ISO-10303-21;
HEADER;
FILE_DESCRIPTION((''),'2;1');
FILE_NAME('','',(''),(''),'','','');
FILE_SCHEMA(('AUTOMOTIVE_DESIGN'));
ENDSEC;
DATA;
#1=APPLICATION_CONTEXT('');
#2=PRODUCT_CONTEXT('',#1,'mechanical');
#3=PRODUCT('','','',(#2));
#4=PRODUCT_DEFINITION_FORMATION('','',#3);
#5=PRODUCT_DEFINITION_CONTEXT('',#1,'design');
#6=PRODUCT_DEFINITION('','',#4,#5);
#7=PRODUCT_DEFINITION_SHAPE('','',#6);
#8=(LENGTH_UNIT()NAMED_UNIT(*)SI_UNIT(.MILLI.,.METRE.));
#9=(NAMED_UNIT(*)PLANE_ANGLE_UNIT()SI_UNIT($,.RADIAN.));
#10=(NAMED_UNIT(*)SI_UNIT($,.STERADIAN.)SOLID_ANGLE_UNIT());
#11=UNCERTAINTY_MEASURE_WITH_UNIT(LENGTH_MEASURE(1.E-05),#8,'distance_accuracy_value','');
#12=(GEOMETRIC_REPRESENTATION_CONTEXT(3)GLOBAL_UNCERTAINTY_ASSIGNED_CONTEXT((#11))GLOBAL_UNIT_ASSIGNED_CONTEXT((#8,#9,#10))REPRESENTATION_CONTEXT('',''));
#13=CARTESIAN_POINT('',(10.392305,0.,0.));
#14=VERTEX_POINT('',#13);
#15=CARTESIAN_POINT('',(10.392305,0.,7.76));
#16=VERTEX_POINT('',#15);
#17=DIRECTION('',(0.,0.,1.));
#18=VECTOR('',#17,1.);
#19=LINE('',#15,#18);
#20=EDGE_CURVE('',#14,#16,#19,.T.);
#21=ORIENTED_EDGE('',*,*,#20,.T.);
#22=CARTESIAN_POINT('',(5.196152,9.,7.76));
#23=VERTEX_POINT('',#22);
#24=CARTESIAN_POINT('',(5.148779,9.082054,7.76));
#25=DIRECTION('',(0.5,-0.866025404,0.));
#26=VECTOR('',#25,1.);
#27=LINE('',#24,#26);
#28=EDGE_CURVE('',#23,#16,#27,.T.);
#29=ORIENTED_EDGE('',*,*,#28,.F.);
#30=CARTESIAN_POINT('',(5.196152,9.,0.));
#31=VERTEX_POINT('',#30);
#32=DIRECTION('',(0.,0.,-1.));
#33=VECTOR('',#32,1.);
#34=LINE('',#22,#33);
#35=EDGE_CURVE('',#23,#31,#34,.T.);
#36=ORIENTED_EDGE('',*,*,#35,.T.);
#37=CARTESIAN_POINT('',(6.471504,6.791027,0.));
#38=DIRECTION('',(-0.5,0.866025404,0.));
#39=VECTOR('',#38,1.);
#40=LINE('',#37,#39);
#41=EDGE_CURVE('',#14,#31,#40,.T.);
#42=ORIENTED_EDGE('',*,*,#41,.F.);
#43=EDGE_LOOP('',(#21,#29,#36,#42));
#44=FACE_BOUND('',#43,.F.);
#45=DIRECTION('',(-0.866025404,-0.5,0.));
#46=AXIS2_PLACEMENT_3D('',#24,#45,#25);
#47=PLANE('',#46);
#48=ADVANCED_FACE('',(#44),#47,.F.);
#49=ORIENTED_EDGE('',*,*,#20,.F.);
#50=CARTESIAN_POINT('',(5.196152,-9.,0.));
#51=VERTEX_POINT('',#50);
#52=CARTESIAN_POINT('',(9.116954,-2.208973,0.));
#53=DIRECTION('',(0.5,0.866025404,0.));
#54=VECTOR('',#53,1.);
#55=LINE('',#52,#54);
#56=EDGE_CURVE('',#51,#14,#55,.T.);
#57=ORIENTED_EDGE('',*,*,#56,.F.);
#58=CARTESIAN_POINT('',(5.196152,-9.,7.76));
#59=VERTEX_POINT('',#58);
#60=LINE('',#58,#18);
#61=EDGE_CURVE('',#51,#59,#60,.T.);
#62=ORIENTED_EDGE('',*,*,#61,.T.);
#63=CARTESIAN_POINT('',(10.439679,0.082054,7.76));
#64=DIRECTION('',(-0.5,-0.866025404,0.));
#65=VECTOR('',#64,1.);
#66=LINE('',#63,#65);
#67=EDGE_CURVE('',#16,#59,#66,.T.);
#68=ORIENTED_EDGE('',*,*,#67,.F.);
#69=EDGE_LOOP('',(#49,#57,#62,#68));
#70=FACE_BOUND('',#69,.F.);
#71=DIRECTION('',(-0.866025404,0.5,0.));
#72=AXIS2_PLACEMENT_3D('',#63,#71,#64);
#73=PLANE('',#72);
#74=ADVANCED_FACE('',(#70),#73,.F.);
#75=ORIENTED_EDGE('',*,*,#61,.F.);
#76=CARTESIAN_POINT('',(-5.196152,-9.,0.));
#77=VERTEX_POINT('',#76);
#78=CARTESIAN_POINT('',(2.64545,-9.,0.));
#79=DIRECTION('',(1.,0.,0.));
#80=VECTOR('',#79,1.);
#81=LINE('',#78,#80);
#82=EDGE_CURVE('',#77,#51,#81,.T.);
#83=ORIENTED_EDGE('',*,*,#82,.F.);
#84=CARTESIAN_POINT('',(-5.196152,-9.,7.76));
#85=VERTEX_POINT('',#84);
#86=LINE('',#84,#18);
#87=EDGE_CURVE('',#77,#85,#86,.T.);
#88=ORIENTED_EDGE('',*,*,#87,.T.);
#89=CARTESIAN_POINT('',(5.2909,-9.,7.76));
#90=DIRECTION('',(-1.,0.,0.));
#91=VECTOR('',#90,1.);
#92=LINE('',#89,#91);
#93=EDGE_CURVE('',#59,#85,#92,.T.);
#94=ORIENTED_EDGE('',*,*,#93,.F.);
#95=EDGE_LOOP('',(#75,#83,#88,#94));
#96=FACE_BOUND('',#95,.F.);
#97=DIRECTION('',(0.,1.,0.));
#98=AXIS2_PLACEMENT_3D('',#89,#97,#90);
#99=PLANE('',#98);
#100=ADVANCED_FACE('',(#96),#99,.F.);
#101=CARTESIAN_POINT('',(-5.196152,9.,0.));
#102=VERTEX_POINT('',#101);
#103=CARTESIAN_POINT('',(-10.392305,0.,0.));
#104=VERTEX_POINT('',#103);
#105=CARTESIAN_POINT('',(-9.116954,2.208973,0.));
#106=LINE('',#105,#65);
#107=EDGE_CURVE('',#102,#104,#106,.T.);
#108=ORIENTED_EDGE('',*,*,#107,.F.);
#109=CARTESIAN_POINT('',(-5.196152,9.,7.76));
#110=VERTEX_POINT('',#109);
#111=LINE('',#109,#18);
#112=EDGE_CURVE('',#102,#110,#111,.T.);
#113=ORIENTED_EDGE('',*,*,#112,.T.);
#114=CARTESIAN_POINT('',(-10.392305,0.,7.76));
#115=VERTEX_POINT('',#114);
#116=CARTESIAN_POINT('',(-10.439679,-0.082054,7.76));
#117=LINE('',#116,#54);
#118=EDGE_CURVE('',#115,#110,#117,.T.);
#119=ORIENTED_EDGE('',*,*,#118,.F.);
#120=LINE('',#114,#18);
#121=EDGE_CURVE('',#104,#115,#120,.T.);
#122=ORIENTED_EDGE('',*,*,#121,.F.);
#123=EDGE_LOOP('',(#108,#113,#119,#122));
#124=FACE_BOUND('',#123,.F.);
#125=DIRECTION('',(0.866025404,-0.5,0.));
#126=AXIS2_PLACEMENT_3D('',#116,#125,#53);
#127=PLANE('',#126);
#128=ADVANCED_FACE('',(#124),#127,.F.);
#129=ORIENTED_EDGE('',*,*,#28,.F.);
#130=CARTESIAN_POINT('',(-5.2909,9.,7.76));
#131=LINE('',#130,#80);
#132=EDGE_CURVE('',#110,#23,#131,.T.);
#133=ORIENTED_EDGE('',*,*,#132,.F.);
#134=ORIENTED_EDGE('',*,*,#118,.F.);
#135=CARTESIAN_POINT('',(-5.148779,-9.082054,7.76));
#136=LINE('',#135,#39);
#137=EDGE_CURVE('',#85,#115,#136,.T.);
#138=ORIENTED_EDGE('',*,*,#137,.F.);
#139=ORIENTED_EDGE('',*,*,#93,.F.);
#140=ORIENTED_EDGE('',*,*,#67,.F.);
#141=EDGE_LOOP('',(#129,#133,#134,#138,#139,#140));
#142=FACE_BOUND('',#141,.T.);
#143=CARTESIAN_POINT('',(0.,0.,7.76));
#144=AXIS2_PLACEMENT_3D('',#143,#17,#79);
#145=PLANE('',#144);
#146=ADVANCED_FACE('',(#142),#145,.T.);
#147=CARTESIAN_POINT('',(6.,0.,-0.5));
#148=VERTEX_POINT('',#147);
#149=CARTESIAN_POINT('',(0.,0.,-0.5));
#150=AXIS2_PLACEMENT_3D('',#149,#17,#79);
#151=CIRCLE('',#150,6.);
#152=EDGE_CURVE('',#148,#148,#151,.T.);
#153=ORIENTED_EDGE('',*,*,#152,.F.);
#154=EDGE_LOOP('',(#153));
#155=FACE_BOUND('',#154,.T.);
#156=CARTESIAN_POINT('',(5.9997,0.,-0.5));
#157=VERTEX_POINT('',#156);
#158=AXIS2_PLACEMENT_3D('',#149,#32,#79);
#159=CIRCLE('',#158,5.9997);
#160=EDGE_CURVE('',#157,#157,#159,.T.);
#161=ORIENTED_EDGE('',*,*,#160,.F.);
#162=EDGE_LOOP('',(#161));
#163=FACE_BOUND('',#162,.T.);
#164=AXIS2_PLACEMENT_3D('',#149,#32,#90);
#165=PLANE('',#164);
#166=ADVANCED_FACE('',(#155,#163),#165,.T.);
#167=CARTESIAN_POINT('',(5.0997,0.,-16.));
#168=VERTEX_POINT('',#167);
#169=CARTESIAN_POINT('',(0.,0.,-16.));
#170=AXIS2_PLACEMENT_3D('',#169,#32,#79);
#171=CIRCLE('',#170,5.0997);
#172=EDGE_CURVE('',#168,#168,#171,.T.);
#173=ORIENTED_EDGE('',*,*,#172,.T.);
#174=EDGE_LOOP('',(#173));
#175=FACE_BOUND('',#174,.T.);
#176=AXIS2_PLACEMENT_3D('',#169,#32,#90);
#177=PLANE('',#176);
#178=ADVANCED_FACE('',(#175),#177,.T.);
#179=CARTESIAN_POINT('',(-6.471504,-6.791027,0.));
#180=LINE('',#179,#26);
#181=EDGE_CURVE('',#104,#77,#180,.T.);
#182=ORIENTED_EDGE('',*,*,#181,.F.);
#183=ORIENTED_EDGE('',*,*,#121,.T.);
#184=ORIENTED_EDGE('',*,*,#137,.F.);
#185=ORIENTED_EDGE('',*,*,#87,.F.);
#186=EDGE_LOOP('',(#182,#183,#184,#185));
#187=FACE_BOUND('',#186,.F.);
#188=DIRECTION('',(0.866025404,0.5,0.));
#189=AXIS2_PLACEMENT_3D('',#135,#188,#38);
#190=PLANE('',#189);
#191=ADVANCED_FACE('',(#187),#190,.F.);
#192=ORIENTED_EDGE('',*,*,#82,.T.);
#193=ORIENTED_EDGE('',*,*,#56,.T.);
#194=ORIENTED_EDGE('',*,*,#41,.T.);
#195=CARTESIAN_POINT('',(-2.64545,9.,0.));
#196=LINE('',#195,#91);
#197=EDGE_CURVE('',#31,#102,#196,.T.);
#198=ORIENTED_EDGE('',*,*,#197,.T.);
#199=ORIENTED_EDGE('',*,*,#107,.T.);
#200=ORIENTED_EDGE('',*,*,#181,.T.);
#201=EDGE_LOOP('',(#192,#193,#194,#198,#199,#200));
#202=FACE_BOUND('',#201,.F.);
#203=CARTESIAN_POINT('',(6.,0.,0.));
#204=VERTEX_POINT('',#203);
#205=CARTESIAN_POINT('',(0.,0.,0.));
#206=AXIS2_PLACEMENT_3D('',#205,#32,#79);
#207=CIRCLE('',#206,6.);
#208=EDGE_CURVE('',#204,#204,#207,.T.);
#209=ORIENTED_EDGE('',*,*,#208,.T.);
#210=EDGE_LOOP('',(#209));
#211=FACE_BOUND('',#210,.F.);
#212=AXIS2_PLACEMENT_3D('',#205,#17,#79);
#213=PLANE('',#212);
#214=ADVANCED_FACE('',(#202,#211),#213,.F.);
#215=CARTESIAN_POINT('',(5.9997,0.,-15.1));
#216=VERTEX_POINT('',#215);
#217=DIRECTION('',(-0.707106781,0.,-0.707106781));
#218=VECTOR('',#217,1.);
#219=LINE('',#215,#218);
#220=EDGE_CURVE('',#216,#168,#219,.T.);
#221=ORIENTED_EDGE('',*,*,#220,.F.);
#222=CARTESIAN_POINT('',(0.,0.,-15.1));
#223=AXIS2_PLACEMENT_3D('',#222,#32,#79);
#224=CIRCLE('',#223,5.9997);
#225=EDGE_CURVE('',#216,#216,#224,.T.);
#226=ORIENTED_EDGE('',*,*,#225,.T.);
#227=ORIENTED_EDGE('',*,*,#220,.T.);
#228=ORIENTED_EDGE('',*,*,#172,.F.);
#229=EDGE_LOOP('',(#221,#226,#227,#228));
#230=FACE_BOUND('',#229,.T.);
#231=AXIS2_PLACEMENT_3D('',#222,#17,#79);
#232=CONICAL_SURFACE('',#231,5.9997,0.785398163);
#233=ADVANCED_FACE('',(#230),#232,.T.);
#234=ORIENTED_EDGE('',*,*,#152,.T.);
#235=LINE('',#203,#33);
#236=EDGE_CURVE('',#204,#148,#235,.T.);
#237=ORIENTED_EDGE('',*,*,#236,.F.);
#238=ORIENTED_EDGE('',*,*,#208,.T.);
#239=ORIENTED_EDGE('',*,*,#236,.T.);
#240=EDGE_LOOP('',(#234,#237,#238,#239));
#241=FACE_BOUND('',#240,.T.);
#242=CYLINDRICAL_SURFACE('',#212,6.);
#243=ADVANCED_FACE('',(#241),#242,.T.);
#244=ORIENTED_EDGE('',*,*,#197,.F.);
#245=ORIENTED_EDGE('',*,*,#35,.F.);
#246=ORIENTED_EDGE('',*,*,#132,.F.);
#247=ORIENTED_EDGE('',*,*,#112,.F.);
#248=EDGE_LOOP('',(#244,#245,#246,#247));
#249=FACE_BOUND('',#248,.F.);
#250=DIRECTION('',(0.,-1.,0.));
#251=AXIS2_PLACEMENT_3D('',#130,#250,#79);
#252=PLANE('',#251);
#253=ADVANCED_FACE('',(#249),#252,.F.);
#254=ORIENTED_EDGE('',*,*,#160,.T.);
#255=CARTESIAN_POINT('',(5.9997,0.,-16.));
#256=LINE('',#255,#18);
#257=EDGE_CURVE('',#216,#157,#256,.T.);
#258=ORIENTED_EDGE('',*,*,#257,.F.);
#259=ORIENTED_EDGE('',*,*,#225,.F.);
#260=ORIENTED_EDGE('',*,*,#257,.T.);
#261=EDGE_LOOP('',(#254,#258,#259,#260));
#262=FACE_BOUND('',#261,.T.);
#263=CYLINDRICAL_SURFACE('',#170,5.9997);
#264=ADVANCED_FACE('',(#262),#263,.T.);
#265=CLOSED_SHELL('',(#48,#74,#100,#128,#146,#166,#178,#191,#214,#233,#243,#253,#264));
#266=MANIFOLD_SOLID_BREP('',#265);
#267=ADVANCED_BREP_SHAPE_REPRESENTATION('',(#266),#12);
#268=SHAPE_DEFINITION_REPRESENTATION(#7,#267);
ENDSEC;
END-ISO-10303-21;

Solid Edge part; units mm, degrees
sketch "Sketch1" plane through (0, 0, 0) normal (0, 0, 1) x (1, 0, 0)
  circle A0 centre (0, 0) radius 10.44
  dimension "D1" = 20.88
extrude "Protrusion1" add sketch "Sketch1" along normal blind 7.76
sketch "Sketch2" plane through (0, 0, 0) normal (0, 0, -1) x (1, 0, 0)
  circle A0 centre (0, 0) radius 6
extrude "Protrusion2" add sketch "Sketch2" along normal blind 16
sketch "Sketch3" plane through (0, 0, -16) normal (0, 0, -1) x (1, 0, 0)
  circle A0 centre (0, 0) radius 5.9997
extrude "Cutout1" cut sketch "Sketch3" against normal blind 15.5 flip side to cut
chamfer "Chamfer_1" distance 0.9 angle 45 1 edges at (-5.9997, 0, -16)
sketch "Sketch4" plane through (0, 0, 7.76) normal (0, 0, 1) x (1, 0, 0)
  line L0 (-5.2909, 9) -> (5.2909, 9)
  dimension "D1" = 18
extrude "Cutout2" cut sketch "Sketch4" against normal up to next material side at (0, 9.05, 7.76)
pattern_circular "Pattern1" count 6 over 360 about axis through (0, 0, 7.76) along (0, 0, 1) of "Cutout2"
properties part number "24104685"
